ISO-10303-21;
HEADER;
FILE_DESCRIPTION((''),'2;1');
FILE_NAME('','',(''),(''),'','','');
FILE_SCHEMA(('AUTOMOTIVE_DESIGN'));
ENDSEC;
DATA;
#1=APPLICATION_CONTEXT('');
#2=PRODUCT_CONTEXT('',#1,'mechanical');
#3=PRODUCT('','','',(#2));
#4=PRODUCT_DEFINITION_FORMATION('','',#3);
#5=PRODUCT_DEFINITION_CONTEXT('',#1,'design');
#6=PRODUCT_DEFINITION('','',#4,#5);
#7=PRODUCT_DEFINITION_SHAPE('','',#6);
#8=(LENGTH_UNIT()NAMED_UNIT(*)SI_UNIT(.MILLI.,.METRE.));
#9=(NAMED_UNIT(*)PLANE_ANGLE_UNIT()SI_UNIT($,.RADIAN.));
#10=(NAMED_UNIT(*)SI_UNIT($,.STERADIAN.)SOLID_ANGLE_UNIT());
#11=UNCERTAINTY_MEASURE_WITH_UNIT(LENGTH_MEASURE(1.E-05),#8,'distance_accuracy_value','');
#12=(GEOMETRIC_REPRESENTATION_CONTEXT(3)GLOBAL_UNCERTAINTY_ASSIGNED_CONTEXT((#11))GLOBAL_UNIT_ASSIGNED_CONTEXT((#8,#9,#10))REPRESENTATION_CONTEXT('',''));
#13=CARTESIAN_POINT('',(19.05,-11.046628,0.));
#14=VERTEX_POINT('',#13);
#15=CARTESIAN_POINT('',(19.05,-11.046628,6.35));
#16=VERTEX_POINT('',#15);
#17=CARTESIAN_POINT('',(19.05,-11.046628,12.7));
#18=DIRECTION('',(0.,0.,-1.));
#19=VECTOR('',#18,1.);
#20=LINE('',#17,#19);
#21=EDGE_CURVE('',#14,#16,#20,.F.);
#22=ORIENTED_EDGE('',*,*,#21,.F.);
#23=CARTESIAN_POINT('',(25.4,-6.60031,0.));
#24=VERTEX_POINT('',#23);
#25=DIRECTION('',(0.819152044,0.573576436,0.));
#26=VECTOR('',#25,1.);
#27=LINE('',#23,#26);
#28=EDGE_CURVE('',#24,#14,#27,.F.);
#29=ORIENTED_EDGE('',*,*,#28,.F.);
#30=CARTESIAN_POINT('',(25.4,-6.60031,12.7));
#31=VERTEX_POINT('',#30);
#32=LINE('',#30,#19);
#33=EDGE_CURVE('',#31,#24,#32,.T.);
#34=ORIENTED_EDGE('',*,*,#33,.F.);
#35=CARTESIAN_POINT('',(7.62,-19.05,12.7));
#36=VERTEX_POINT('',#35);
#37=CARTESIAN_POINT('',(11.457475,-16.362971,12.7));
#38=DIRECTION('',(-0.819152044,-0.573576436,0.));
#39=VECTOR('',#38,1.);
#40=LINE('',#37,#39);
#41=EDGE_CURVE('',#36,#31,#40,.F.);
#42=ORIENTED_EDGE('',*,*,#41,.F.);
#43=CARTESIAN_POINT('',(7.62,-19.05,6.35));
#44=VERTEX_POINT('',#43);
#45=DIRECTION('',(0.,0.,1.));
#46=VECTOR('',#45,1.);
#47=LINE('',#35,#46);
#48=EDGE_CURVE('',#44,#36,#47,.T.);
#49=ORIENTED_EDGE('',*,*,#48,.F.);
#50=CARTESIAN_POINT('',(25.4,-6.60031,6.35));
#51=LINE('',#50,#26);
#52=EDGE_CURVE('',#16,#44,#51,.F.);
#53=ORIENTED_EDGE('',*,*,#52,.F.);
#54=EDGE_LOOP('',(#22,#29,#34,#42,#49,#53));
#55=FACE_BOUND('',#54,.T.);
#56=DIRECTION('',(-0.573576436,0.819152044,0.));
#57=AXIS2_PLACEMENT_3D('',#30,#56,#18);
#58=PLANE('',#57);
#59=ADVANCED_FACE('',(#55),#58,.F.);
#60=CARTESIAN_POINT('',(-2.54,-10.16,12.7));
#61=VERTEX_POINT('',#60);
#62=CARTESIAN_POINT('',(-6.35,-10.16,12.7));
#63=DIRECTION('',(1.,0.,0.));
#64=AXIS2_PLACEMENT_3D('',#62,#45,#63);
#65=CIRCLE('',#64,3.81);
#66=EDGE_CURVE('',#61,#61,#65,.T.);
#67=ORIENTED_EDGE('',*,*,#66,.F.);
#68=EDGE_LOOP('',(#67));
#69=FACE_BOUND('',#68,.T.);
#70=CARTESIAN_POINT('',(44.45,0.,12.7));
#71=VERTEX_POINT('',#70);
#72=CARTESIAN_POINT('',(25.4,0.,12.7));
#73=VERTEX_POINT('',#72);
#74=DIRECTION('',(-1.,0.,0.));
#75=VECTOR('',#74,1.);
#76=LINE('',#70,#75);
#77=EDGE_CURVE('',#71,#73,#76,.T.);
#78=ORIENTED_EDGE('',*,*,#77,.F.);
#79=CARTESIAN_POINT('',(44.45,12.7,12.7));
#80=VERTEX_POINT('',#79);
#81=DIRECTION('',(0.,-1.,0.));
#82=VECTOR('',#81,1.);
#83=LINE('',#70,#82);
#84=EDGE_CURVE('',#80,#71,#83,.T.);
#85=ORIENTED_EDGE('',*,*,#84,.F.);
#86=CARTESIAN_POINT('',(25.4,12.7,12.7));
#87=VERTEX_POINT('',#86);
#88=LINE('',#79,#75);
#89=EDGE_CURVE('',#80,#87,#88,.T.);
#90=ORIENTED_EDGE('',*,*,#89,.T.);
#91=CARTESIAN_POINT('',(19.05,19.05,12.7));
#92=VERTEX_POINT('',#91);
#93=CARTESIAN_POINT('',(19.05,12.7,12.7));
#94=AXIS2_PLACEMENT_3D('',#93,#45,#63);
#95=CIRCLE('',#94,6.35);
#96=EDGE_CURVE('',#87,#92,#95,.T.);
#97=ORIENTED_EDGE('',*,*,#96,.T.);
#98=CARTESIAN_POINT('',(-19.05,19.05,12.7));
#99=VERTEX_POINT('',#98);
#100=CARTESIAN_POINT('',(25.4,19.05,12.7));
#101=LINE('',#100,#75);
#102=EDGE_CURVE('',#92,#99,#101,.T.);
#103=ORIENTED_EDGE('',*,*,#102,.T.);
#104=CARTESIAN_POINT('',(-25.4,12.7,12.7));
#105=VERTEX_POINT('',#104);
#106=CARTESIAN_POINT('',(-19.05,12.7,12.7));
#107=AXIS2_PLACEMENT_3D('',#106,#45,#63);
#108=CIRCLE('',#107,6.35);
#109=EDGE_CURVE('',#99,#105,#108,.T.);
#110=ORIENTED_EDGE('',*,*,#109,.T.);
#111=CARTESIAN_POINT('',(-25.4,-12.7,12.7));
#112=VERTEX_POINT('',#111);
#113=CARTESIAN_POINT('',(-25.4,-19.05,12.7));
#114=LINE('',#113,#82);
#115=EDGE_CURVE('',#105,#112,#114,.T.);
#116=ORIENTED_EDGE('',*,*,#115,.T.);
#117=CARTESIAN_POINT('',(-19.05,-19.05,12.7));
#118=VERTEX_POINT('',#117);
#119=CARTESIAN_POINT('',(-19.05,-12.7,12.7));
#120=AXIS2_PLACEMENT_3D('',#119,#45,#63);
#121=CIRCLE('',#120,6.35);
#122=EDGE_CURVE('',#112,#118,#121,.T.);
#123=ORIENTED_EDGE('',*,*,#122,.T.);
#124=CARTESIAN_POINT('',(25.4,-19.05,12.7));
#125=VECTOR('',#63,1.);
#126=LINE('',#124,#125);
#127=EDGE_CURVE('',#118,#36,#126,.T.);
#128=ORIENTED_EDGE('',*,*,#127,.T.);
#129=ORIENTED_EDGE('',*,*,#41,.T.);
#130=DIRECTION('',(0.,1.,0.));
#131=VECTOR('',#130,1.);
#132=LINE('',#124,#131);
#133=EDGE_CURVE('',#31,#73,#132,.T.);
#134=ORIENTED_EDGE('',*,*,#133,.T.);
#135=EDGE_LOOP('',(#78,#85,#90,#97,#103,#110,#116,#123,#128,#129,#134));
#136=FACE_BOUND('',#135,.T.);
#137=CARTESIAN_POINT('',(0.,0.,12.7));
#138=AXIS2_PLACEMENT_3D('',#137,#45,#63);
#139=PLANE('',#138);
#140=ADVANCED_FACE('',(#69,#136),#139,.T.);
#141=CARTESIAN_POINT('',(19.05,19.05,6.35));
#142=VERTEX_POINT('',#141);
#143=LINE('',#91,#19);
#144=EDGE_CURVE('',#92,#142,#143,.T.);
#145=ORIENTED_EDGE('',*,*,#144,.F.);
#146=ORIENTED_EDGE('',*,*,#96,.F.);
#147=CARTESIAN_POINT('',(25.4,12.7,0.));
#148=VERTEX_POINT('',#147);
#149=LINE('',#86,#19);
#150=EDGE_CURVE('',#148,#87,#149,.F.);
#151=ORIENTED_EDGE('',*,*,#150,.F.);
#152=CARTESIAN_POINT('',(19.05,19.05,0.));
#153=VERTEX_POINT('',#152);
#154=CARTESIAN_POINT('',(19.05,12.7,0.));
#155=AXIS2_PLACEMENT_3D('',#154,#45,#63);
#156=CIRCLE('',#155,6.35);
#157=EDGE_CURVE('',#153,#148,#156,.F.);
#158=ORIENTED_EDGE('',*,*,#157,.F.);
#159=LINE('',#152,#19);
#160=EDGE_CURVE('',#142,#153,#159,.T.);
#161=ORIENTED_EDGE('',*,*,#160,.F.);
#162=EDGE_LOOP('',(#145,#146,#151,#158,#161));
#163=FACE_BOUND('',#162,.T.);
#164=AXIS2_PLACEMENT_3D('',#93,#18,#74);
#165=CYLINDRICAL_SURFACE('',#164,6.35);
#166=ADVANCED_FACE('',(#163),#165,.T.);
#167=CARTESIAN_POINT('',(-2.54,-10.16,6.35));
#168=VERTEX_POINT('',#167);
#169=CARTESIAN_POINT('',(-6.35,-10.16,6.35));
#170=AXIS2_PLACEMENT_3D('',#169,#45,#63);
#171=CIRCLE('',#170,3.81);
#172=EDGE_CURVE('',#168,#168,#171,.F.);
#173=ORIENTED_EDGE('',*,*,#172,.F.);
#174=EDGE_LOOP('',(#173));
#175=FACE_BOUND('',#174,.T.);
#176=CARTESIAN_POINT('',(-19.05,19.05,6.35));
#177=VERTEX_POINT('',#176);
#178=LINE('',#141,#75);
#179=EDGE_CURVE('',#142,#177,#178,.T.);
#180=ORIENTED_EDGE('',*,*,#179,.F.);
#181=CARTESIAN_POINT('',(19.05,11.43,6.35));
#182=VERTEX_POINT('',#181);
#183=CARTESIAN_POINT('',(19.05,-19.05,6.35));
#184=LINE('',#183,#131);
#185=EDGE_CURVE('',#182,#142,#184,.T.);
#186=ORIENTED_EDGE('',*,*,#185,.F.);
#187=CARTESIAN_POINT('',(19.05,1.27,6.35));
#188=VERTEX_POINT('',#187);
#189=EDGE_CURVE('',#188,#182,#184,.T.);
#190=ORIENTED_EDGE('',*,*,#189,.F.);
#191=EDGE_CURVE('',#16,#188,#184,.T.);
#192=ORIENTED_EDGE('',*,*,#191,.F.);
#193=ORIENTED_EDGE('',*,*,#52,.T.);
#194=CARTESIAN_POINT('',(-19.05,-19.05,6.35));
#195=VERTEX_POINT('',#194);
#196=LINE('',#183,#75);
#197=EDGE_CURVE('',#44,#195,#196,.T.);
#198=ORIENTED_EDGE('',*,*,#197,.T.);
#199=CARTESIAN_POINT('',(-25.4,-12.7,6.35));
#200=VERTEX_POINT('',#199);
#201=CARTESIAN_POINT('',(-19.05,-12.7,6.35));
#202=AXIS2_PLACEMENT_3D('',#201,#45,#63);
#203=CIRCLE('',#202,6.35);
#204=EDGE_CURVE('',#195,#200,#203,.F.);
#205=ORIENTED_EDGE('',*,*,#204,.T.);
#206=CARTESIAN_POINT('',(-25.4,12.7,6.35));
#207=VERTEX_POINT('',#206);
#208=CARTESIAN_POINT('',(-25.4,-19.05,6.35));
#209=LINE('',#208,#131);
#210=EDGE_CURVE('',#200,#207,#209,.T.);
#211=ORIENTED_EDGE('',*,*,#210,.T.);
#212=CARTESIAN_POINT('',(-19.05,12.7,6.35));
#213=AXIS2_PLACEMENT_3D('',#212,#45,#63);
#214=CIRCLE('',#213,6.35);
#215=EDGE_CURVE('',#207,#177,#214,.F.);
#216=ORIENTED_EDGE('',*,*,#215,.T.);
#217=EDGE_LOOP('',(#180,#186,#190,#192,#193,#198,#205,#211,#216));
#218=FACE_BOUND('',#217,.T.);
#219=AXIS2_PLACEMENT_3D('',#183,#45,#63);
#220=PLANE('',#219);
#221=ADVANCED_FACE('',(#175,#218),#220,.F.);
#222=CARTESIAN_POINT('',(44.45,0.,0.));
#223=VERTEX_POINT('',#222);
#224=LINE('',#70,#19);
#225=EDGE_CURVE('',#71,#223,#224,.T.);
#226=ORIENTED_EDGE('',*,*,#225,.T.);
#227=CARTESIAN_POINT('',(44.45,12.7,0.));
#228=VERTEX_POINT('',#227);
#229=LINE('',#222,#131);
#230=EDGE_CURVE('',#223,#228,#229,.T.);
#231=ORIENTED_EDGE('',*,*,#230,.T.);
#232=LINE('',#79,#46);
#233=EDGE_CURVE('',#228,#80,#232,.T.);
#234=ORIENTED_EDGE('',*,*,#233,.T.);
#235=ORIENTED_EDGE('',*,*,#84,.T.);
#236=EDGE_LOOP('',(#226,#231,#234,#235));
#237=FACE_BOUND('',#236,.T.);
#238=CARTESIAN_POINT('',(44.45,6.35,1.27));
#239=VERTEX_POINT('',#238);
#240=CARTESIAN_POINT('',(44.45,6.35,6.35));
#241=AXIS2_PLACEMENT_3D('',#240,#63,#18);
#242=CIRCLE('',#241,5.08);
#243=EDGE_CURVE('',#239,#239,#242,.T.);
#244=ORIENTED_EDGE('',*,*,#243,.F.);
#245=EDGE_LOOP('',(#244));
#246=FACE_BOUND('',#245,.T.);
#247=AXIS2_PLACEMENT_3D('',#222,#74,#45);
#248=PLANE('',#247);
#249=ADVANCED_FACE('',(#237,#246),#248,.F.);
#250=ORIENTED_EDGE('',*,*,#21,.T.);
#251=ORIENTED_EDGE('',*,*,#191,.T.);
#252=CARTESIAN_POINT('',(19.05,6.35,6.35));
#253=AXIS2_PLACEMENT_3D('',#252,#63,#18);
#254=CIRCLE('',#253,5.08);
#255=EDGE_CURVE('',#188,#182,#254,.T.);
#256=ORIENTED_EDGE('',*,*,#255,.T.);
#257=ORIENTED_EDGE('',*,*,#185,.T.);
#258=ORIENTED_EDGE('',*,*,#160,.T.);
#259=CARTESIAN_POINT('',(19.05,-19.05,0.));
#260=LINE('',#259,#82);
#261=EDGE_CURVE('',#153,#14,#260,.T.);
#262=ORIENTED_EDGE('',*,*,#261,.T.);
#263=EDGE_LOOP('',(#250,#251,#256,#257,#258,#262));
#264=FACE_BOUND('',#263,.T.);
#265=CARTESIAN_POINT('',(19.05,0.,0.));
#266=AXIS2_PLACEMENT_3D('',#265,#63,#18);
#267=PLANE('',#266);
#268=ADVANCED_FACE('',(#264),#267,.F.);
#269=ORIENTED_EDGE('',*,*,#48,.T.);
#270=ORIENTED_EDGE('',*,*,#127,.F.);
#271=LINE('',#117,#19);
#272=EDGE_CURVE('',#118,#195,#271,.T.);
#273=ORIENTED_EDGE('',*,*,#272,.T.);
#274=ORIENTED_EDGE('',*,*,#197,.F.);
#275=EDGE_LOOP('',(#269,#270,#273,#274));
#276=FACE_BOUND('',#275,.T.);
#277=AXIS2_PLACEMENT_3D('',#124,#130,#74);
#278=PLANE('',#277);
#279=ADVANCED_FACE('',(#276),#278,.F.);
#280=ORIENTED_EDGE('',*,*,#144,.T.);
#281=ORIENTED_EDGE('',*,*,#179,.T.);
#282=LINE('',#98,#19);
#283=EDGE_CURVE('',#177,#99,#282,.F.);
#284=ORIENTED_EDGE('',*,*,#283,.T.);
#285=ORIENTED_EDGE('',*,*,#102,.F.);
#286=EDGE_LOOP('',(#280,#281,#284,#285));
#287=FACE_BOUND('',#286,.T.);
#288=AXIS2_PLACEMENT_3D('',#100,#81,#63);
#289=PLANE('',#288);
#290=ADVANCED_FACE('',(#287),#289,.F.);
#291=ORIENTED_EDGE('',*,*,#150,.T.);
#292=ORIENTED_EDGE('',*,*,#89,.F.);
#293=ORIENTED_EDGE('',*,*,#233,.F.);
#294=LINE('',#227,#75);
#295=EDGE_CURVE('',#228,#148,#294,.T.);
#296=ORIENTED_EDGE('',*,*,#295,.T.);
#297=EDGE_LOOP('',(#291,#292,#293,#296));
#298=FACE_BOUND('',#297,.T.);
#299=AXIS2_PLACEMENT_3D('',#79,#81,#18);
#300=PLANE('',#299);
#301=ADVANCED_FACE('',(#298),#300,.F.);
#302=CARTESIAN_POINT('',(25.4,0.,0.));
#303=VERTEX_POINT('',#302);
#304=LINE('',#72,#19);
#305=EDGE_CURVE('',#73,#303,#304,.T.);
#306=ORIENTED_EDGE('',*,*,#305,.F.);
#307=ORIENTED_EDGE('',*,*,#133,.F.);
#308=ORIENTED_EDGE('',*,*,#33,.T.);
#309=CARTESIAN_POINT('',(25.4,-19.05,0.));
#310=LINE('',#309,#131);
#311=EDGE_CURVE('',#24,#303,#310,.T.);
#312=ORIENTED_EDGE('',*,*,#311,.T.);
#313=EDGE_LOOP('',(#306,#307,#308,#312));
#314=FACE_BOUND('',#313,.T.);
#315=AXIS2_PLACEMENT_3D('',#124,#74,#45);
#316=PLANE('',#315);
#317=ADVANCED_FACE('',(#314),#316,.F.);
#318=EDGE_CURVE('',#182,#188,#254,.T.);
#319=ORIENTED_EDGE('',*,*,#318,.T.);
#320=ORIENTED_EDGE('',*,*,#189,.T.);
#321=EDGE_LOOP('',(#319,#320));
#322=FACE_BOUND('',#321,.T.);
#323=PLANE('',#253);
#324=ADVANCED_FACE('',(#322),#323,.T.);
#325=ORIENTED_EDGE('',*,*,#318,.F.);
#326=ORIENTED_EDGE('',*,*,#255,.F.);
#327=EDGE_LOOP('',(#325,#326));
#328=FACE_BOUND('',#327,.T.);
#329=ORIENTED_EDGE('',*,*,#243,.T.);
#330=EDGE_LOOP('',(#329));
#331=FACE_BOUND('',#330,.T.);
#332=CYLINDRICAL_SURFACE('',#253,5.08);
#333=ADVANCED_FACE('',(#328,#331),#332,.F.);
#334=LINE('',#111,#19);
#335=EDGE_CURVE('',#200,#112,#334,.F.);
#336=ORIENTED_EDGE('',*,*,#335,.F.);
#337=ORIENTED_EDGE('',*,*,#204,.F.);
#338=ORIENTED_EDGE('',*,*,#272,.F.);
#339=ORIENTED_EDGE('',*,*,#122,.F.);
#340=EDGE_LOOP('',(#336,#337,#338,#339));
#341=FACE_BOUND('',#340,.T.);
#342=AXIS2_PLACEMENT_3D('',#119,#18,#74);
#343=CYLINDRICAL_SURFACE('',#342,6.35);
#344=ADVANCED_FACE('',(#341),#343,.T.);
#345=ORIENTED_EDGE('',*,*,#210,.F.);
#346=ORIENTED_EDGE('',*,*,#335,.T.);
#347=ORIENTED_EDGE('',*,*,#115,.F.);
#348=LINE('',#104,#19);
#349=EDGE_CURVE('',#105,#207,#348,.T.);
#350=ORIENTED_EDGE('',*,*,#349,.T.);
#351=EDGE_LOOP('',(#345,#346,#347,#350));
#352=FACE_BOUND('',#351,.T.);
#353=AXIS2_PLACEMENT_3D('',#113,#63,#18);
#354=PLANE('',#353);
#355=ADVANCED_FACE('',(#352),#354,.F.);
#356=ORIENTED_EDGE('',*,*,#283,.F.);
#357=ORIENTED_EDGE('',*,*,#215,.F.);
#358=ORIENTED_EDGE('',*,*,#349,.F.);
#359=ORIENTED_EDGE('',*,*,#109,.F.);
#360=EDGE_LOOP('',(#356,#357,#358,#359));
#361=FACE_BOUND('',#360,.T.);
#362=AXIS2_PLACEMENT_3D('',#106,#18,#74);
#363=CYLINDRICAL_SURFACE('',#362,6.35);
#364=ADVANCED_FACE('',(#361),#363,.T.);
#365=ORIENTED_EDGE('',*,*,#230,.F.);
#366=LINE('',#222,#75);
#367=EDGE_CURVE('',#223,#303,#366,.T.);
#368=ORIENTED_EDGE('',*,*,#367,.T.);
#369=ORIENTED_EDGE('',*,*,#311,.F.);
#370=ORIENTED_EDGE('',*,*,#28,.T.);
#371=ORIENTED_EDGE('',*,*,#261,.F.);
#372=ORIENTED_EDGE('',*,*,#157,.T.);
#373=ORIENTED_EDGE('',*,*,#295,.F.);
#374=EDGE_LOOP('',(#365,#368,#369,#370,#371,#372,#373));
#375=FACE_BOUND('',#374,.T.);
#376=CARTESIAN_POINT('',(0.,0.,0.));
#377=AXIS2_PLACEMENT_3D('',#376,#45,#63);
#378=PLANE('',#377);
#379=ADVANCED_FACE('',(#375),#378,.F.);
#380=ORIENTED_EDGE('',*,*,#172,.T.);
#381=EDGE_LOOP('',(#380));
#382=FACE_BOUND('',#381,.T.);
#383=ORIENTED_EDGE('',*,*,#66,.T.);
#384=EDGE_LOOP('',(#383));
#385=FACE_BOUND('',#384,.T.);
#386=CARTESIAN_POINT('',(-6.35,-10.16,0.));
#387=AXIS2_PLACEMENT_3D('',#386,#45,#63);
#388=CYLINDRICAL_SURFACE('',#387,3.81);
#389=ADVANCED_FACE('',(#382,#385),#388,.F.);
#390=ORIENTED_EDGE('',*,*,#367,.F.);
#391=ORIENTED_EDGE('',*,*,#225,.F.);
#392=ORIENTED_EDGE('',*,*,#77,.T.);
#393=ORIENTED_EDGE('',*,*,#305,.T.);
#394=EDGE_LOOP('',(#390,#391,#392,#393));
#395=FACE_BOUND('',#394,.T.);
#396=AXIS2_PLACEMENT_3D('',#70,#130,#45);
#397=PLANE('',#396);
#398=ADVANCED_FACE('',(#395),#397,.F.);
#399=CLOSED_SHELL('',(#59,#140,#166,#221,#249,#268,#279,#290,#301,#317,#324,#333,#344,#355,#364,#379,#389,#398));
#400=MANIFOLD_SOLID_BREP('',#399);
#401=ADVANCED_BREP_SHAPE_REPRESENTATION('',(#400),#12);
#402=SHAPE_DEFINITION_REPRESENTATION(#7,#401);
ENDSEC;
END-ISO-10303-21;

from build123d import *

# Parameters (mm, degrees)
SKETCH2_W           = 50.8
SKETCH2_H           = 38.1
BOSS_EXTRUDE1_DEPTH = 12.7
FILLET1_R           = 6.35
SKETCH3_R           = 3.81
CUT_EXTRUDE1_DEPTH  = 35.195796525
SKETCH7_W           = 12.7
SKETCH7_H           = 12.7
BOSS_EXTRUDE2_DEPTH = 19.05
SKETCH8_R           = 5.08
CUT_EXTRUDE2_DEPTH  = 25.4
SKETCH9_W           = 6.35
SKETCH9_H           = 38.1
CUT_EXTRUDE3_DEPTH  = 44.45
CUT_EXTRUDE4_REACH  = 52
SKETCH10_W          = 6.35
SKETCH10_H          = 6.35
CHAMFER6_SIZE       = 17.78
CHAMFER6_SIZE_2     = 12.449690029


with BuildPart() as part:
    # Sketch2 → Boss-Extrude1 (new body)
    with BuildSketch(Plane.XY):
        Rectangle(SKETCH2_W, SKETCH2_H)
    extrude(amount=BOSS_EXTRUDE1_DEPTH)

    # Fillet1
    fillet1_edges = [part.edges().sort_by_distance(p)[0] for p in [
        (-25.4, 19.05, 6.35),
        (25.4, 19.05, 6.35),
        (-25.4, -19.05, 6.35),
    ]]
    fillet(fillet1_edges, radius=FILLET1_R)

    # Sketch3 → Cut-Extrude1 (cut, through all)
    with BuildSketch(Plane.XY.offset(12.7)):
        with Locations((-6.35, -10.16)):
            Circle(SKETCH3_R)
    extrude(amount=-CUT_EXTRUDE1_DEPTH, mode=Mode.SUBTRACT)

    # Sketch7 → Boss-Extrude2 (add)
    with BuildSketch(Plane(origin=(25.4, 0, 0), x_dir=(0, 0, -1), z_dir=(1, 0, 0))):
        with Locations((-6.35, 6.35)):
            Rectangle(SKETCH7_W, SKETCH7_H)
    extrude(amount=BOSS_EXTRUDE2_DEPTH)

    # Sketch8 → Cut-Extrude2 (cut)
    with BuildSketch(Plane(origin=(44.45, 0, 0), x_dir=(0, 0, -1), z_dir=(1, 0, 0))):
        with Locations((-6.35, 6.35)):
            Circle(SKETCH8_R)
    extrude(amount=-CUT_EXTRUDE2_DEPTH, mode=Mode.SUBTRACT)

    # Sketch9 → Cut-Extrude3 (cut)
    with BuildSketch(Plane.ZY.offset(25.4)):
        with Locations((3.175, 0)):
            Rectangle(SKETCH9_W, SKETCH9_H)
    extrude(amount=-CUT_EXTRUDE3_DEPTH, mode=Mode.SUBTRACT)

    # Sketch10 → Cut-Extrude4 (cut, up to next)
    with BuildSketch(Plane.ZY.offset(-19.05), mode=Mode.PRIVATE) as cut_extrude4_sk1:
        with Locations((3.175, -15.875)):
            Rectangle(SKETCH10_W, SKETCH10_H)
    cut_extrude4_tool1 = extrude(cut_extrude4_sk1.sketch, amount=-CUT_EXTRUDE4_REACH, mode=Mode.PRIVATE) & part.part
    add(cut_extrude4_tool1.solids().sort_by_distance((19.05, -15.875, 3.175))[0], mode=Mode.SUBTRACT)

    # Chamfer6
    # the kernel refuses this chamfer: 17.78, 12.449690029 mm, written as the material it takes off along each edge
    with BuildSketch(Plane(origin=(25.4, -19.05, -39.567778654), x_dir=(-0.9997533347641299, -0.022209674198457294, 0), z_dir=(0, 0, 1))) as chamfer6_piece_1:
        Polygon((CHAMFER6_SIZE * 0.999753334764, -CHAMFER6_SIZE * 0.0222096741985), (-CHAMFER6_SIZE_2 * 0.0222096741991, -CHAMFER6_SIZE_2 * 0.999753334794), (0, 0), align=None)
    extrude(amount=98.185557309, mode=Mode.SUBTRACT)


solid = part.part
